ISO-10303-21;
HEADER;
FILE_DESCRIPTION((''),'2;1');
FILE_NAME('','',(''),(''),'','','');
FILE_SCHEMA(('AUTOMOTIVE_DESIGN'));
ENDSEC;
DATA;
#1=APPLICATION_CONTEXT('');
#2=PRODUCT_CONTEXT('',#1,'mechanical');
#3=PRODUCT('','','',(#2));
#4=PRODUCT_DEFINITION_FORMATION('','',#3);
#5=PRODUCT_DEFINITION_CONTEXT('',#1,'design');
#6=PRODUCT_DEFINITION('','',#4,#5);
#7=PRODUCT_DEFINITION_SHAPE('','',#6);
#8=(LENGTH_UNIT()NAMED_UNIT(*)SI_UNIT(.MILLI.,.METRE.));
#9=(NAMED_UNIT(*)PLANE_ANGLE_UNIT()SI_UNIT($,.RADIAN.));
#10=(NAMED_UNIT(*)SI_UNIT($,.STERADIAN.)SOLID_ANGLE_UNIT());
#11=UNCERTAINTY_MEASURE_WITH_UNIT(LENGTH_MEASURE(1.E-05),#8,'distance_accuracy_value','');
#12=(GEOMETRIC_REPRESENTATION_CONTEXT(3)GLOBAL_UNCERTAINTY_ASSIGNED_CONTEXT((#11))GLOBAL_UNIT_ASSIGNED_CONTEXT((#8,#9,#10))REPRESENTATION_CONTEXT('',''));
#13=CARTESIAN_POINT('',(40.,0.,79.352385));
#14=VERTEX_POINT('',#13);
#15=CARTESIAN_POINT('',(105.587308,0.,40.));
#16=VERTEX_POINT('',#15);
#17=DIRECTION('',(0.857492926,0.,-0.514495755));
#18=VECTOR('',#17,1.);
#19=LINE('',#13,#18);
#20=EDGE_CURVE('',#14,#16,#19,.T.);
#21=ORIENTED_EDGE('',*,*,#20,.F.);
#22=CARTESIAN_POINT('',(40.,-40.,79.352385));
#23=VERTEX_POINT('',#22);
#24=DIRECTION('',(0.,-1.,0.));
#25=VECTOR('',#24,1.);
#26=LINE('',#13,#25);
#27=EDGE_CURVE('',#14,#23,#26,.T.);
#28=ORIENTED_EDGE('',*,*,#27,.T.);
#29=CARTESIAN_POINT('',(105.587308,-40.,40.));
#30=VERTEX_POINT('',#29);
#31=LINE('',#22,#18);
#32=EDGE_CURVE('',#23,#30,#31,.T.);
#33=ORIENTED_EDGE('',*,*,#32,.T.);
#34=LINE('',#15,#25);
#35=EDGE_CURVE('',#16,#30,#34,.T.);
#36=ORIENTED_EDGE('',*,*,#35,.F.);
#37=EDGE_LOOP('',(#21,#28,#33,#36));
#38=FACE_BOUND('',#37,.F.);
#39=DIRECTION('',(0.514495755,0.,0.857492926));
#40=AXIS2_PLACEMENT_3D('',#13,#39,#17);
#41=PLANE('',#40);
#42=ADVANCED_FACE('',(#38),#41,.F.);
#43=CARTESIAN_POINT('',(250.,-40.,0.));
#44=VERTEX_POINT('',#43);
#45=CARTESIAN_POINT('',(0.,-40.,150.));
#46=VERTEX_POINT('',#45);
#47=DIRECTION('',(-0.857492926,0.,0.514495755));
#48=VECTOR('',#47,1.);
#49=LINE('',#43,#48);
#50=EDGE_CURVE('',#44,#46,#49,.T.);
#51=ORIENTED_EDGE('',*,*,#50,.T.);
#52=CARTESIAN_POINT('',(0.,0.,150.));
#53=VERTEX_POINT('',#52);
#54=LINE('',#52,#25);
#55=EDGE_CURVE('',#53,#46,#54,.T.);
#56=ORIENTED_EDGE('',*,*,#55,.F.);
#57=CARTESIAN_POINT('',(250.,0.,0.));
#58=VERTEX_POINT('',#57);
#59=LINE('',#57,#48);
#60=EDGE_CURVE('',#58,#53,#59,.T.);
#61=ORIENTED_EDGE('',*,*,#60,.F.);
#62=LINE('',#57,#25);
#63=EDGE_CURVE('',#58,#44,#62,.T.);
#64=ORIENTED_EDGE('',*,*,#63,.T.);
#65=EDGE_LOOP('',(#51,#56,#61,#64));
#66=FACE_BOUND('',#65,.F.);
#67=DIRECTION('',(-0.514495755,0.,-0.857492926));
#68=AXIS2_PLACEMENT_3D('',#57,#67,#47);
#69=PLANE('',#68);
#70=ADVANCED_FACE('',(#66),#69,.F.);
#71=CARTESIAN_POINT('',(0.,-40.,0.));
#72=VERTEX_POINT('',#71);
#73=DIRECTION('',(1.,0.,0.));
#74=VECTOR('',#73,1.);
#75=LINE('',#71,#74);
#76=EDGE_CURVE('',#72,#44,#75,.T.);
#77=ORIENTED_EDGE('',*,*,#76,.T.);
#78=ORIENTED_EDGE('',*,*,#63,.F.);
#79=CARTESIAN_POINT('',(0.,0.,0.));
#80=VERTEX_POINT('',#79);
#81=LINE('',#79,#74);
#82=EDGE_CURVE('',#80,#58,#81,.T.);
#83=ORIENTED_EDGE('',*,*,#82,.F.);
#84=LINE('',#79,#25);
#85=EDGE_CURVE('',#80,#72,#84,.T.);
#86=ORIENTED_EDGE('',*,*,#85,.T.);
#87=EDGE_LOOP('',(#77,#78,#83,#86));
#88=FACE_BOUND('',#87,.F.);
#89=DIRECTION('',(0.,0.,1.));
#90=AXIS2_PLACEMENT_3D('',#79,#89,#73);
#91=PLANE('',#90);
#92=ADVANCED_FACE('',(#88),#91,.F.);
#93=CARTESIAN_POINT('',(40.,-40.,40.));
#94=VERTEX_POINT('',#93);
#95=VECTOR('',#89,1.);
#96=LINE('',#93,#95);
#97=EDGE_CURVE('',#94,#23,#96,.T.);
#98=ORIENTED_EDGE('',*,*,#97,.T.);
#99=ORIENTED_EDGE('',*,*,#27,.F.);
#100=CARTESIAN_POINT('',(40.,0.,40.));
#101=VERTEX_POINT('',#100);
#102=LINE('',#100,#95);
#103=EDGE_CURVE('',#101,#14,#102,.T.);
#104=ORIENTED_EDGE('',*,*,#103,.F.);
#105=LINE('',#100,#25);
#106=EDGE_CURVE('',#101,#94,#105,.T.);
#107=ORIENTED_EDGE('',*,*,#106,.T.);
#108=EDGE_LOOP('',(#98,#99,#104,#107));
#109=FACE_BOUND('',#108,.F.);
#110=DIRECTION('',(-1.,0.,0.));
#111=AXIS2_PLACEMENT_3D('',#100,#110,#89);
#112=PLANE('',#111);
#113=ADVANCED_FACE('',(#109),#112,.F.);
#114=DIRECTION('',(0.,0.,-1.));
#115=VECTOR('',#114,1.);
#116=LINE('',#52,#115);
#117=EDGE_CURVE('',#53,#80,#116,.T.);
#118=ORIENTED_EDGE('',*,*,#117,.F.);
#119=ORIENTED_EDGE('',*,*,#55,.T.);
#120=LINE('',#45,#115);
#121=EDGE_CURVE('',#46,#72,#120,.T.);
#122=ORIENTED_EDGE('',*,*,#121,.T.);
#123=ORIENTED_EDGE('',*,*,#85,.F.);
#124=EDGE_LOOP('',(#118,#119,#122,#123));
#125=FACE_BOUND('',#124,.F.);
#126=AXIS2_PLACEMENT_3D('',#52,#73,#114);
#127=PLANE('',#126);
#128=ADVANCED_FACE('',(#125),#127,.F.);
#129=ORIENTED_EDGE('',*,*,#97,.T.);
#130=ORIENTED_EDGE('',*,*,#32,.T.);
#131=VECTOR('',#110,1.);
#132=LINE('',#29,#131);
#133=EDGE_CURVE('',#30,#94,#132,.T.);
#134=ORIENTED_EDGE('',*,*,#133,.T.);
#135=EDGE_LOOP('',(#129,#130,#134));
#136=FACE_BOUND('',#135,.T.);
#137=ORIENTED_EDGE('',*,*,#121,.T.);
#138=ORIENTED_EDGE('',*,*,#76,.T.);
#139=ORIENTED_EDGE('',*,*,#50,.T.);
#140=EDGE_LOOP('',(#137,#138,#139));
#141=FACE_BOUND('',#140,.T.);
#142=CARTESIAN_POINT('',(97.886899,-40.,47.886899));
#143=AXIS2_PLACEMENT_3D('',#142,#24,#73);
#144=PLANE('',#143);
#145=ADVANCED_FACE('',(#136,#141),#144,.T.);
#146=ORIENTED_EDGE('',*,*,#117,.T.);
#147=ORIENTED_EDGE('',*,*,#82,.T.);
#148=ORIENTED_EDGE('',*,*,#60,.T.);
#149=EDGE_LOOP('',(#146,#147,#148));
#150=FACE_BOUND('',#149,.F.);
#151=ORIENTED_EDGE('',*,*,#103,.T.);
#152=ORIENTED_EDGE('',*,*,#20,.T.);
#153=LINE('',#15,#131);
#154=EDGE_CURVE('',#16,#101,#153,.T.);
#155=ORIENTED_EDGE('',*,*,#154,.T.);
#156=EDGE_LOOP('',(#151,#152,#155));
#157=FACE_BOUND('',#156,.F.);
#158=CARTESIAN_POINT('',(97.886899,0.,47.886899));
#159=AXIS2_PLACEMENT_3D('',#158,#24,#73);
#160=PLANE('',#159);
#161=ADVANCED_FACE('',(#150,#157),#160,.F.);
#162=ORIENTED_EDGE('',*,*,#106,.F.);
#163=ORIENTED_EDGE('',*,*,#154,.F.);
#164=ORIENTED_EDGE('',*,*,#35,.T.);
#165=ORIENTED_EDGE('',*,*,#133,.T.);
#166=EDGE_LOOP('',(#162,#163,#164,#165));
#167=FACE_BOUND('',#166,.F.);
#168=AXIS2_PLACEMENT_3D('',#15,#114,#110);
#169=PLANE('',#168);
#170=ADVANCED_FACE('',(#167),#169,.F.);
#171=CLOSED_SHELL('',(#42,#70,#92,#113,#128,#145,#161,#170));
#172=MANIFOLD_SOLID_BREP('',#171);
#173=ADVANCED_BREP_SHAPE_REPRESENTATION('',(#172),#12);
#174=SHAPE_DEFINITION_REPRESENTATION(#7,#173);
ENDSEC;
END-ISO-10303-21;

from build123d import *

# Parameters (mm, degrees)
F1_DEPTH = 40


# Not quite as in the source:
# - a feature names something its author has since deleted; it is built from what else it names


with BuildPart() as f1:
    # F0 (on Front) → F1 (new body)
    with BuildSketch(Plane.XZ):
        Polygon((0, 150), (0, 0), (250, 0), align=None)
        Polygon((105.5873080687, 40), (40, 40), (40, 79.3523848412), align=None, mode=Mode.SUBTRACT)
    extrude(amount=F1_DEPTH)


solid = f1.part
